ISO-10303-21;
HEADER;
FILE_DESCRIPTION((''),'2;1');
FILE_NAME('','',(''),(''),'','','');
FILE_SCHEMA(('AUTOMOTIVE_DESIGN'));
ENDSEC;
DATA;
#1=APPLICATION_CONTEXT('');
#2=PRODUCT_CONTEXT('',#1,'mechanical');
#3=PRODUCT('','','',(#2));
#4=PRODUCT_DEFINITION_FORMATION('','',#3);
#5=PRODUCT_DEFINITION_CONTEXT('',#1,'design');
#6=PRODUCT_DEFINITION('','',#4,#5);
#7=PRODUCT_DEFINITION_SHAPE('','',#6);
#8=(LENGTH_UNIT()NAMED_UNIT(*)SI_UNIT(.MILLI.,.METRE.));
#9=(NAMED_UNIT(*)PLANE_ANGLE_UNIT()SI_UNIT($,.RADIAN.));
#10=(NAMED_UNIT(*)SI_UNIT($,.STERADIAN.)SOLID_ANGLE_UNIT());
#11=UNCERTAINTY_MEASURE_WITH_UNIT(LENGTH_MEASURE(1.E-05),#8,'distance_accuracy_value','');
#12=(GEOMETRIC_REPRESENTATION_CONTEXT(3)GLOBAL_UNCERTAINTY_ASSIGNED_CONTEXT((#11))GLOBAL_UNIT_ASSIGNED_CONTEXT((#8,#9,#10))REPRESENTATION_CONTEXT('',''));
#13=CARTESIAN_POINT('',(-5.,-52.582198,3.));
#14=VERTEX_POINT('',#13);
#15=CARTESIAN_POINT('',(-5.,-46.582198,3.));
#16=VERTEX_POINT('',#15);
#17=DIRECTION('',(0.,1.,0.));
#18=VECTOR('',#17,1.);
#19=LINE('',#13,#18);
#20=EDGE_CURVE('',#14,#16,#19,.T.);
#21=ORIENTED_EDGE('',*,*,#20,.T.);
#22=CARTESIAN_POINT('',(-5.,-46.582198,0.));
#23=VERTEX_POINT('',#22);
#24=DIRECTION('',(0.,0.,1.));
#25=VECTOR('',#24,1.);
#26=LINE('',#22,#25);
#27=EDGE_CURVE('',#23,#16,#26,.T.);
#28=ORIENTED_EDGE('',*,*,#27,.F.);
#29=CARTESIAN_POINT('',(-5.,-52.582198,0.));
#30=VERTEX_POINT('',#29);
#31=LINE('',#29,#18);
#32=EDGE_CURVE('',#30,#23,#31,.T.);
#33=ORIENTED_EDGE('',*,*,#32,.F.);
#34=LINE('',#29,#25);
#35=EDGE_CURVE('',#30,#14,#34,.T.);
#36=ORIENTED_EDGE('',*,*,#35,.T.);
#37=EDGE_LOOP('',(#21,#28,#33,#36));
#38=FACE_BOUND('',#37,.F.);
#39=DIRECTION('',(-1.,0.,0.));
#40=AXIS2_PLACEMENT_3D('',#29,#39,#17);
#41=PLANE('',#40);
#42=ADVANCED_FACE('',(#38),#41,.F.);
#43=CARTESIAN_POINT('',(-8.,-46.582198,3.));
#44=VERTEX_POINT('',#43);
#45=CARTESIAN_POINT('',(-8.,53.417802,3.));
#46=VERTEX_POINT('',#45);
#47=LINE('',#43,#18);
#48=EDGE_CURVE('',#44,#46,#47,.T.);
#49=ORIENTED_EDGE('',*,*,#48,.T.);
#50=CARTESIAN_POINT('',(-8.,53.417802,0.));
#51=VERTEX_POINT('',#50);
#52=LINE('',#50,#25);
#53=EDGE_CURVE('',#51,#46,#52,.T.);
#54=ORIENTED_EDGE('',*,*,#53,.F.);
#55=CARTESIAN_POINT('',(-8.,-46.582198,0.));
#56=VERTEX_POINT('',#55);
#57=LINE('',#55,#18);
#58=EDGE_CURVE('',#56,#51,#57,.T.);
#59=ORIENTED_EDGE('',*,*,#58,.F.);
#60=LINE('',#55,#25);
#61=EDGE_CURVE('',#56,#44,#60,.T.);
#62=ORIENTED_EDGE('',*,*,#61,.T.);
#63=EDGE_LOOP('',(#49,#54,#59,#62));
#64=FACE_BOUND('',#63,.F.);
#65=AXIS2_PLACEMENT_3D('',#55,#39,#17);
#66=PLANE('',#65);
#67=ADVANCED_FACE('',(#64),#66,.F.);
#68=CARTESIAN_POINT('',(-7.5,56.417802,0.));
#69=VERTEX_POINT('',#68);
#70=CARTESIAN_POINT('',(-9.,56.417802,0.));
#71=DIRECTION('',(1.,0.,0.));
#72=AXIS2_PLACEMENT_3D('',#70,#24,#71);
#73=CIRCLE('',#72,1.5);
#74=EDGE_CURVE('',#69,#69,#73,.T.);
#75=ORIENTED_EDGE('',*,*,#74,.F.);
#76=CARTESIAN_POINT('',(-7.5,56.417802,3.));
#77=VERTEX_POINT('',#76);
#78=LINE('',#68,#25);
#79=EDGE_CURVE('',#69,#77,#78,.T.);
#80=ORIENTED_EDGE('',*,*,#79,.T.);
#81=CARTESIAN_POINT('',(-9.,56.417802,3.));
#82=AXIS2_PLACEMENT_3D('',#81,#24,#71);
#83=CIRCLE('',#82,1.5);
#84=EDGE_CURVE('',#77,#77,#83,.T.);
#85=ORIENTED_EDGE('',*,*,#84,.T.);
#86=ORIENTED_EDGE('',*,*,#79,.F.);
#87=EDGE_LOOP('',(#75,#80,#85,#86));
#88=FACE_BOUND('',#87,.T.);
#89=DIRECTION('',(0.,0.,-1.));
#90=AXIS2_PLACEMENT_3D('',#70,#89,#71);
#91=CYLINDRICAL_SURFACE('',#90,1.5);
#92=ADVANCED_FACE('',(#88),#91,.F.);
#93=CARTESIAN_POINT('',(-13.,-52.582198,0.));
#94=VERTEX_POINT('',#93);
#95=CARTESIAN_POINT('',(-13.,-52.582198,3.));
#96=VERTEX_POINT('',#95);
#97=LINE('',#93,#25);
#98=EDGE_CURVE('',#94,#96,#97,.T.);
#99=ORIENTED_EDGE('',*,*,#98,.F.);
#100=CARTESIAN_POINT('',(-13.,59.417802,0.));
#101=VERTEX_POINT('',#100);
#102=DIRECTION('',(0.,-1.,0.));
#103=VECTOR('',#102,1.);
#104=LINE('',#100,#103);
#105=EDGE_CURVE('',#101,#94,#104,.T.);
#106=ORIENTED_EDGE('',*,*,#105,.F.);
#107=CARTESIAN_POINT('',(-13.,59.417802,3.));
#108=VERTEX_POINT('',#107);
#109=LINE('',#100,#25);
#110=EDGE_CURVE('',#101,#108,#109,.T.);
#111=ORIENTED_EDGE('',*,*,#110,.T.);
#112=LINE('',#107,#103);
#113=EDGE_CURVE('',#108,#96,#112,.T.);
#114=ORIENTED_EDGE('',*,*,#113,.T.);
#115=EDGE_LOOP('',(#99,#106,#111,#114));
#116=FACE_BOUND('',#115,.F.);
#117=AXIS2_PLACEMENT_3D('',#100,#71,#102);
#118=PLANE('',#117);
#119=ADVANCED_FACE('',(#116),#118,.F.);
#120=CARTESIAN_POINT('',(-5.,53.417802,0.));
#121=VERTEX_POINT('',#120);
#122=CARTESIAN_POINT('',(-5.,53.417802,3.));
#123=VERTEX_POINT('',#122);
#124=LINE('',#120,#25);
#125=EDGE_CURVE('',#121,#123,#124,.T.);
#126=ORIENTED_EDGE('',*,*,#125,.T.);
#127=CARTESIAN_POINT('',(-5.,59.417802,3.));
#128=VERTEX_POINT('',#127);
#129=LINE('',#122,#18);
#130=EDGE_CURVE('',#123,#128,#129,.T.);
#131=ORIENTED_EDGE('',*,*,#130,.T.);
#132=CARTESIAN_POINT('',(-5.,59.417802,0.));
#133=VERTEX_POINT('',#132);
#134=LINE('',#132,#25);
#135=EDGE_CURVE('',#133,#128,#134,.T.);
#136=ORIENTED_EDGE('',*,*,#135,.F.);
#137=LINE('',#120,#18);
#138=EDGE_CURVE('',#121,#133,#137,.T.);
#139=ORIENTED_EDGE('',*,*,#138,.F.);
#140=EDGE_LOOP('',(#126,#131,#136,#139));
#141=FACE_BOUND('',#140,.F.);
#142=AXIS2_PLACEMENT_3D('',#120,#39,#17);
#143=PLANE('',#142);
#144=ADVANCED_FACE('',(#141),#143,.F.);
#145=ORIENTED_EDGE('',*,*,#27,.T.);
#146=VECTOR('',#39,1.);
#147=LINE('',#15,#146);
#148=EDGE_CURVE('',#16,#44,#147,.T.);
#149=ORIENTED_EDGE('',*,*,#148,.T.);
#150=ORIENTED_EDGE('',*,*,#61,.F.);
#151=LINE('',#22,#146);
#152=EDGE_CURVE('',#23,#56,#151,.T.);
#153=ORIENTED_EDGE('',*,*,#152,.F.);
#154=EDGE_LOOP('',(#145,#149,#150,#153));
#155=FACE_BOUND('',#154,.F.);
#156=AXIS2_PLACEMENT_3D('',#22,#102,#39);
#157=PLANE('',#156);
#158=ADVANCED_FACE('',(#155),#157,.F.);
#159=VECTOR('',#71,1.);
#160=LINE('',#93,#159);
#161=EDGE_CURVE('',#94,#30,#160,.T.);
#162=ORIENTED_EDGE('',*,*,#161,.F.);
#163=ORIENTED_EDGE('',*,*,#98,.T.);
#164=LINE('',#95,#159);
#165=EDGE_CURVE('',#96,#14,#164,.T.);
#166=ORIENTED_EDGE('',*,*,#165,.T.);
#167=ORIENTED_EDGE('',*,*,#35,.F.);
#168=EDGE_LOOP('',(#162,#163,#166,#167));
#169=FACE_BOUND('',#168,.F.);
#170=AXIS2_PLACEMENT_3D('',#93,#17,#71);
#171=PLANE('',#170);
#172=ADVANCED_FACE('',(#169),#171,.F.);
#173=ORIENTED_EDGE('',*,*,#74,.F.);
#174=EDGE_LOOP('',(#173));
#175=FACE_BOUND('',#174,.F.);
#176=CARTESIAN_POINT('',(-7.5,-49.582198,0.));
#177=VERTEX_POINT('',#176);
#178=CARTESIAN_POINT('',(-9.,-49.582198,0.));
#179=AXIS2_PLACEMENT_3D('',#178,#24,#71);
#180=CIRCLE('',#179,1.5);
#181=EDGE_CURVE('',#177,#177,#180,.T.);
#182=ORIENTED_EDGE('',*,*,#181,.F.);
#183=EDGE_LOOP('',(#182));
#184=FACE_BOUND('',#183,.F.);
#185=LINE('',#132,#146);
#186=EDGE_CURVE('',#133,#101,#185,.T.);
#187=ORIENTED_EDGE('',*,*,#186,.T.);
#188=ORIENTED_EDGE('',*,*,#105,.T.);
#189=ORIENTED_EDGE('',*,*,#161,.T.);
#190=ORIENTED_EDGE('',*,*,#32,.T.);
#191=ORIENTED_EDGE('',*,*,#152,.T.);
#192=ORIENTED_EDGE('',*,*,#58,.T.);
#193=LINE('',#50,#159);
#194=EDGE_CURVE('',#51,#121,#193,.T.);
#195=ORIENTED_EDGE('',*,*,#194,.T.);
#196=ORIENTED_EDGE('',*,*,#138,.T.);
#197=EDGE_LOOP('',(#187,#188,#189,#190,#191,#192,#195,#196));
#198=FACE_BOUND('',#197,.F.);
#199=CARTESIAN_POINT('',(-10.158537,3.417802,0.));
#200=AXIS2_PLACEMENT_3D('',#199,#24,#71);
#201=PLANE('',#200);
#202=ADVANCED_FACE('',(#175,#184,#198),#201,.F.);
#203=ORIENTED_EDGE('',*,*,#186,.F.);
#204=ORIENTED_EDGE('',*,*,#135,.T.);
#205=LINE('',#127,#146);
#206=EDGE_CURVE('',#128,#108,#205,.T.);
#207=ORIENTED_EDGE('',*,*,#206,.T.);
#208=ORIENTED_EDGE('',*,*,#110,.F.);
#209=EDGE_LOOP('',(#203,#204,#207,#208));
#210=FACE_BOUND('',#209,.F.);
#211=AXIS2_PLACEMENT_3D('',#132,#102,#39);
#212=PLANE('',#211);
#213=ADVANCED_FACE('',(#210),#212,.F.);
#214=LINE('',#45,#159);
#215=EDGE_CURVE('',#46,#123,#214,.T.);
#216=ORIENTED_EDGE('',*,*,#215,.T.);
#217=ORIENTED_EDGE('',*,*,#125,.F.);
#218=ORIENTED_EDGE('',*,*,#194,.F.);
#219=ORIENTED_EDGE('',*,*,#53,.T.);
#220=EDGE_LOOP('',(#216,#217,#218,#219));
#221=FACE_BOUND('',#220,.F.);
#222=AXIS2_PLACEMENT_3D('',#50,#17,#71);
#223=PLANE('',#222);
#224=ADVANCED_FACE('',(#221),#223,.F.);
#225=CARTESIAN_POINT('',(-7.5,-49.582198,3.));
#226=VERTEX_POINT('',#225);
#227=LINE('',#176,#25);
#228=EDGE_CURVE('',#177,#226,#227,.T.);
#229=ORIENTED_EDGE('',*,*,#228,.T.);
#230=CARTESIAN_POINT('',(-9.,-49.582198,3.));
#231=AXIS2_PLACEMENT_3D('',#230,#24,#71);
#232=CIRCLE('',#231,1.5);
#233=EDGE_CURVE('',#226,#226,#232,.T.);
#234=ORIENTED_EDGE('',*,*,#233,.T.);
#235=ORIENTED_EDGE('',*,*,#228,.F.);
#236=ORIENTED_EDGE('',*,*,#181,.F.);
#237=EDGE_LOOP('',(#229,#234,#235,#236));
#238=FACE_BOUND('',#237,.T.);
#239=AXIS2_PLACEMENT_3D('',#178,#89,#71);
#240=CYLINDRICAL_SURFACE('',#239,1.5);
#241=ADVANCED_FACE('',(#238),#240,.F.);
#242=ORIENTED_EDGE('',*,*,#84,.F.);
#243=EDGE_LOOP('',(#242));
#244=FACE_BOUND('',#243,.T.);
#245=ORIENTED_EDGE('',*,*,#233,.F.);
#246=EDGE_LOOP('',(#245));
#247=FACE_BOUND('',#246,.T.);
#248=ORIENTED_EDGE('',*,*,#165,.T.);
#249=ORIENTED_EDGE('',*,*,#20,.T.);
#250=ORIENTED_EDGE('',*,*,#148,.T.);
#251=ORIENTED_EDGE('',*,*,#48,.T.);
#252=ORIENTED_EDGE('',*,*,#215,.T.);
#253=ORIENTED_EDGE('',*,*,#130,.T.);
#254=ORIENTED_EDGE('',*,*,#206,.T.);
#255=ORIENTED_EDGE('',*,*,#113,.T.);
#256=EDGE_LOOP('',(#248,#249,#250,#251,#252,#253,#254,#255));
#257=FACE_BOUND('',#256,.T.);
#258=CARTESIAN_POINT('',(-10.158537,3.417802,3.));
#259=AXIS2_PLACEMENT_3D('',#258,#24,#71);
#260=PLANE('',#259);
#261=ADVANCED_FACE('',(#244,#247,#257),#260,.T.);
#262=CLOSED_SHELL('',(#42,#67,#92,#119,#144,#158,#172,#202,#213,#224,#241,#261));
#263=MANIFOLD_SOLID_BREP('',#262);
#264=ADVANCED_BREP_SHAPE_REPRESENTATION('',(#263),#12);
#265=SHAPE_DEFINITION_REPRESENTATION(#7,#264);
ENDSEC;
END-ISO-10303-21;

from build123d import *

# Parameters (mm, degrees)
F0_R     = 1.5
F1_DEPTH = 3


# Not quite as in the source:
# - a feature names something its author has since deleted; it is built from what else it names


with BuildPart() as f1:
    # F0 (on Top) → F1 (new body)
    with BuildSketch(Plane.XY):
        Polygon((-5, 59.4178017552), (-13, 59.4178017552), (-13, -52.5821982448), (-5, -52.5821982448), (-5, -46.5821982448), (-8, -46.5821982448), (-8, 53.4178017552), (-5, 53.4178017552), align=None)
        with Locations((-9, -49.5821982448)):
            Circle(F0_R, mode=Mode.SUBTRACT)
        with Locations((-9, 56.4178017552)):
            Circle(F0_R, mode=Mode.SUBTRACT)
    extrude(amount=F1_DEPTH)


solid = f1.part
